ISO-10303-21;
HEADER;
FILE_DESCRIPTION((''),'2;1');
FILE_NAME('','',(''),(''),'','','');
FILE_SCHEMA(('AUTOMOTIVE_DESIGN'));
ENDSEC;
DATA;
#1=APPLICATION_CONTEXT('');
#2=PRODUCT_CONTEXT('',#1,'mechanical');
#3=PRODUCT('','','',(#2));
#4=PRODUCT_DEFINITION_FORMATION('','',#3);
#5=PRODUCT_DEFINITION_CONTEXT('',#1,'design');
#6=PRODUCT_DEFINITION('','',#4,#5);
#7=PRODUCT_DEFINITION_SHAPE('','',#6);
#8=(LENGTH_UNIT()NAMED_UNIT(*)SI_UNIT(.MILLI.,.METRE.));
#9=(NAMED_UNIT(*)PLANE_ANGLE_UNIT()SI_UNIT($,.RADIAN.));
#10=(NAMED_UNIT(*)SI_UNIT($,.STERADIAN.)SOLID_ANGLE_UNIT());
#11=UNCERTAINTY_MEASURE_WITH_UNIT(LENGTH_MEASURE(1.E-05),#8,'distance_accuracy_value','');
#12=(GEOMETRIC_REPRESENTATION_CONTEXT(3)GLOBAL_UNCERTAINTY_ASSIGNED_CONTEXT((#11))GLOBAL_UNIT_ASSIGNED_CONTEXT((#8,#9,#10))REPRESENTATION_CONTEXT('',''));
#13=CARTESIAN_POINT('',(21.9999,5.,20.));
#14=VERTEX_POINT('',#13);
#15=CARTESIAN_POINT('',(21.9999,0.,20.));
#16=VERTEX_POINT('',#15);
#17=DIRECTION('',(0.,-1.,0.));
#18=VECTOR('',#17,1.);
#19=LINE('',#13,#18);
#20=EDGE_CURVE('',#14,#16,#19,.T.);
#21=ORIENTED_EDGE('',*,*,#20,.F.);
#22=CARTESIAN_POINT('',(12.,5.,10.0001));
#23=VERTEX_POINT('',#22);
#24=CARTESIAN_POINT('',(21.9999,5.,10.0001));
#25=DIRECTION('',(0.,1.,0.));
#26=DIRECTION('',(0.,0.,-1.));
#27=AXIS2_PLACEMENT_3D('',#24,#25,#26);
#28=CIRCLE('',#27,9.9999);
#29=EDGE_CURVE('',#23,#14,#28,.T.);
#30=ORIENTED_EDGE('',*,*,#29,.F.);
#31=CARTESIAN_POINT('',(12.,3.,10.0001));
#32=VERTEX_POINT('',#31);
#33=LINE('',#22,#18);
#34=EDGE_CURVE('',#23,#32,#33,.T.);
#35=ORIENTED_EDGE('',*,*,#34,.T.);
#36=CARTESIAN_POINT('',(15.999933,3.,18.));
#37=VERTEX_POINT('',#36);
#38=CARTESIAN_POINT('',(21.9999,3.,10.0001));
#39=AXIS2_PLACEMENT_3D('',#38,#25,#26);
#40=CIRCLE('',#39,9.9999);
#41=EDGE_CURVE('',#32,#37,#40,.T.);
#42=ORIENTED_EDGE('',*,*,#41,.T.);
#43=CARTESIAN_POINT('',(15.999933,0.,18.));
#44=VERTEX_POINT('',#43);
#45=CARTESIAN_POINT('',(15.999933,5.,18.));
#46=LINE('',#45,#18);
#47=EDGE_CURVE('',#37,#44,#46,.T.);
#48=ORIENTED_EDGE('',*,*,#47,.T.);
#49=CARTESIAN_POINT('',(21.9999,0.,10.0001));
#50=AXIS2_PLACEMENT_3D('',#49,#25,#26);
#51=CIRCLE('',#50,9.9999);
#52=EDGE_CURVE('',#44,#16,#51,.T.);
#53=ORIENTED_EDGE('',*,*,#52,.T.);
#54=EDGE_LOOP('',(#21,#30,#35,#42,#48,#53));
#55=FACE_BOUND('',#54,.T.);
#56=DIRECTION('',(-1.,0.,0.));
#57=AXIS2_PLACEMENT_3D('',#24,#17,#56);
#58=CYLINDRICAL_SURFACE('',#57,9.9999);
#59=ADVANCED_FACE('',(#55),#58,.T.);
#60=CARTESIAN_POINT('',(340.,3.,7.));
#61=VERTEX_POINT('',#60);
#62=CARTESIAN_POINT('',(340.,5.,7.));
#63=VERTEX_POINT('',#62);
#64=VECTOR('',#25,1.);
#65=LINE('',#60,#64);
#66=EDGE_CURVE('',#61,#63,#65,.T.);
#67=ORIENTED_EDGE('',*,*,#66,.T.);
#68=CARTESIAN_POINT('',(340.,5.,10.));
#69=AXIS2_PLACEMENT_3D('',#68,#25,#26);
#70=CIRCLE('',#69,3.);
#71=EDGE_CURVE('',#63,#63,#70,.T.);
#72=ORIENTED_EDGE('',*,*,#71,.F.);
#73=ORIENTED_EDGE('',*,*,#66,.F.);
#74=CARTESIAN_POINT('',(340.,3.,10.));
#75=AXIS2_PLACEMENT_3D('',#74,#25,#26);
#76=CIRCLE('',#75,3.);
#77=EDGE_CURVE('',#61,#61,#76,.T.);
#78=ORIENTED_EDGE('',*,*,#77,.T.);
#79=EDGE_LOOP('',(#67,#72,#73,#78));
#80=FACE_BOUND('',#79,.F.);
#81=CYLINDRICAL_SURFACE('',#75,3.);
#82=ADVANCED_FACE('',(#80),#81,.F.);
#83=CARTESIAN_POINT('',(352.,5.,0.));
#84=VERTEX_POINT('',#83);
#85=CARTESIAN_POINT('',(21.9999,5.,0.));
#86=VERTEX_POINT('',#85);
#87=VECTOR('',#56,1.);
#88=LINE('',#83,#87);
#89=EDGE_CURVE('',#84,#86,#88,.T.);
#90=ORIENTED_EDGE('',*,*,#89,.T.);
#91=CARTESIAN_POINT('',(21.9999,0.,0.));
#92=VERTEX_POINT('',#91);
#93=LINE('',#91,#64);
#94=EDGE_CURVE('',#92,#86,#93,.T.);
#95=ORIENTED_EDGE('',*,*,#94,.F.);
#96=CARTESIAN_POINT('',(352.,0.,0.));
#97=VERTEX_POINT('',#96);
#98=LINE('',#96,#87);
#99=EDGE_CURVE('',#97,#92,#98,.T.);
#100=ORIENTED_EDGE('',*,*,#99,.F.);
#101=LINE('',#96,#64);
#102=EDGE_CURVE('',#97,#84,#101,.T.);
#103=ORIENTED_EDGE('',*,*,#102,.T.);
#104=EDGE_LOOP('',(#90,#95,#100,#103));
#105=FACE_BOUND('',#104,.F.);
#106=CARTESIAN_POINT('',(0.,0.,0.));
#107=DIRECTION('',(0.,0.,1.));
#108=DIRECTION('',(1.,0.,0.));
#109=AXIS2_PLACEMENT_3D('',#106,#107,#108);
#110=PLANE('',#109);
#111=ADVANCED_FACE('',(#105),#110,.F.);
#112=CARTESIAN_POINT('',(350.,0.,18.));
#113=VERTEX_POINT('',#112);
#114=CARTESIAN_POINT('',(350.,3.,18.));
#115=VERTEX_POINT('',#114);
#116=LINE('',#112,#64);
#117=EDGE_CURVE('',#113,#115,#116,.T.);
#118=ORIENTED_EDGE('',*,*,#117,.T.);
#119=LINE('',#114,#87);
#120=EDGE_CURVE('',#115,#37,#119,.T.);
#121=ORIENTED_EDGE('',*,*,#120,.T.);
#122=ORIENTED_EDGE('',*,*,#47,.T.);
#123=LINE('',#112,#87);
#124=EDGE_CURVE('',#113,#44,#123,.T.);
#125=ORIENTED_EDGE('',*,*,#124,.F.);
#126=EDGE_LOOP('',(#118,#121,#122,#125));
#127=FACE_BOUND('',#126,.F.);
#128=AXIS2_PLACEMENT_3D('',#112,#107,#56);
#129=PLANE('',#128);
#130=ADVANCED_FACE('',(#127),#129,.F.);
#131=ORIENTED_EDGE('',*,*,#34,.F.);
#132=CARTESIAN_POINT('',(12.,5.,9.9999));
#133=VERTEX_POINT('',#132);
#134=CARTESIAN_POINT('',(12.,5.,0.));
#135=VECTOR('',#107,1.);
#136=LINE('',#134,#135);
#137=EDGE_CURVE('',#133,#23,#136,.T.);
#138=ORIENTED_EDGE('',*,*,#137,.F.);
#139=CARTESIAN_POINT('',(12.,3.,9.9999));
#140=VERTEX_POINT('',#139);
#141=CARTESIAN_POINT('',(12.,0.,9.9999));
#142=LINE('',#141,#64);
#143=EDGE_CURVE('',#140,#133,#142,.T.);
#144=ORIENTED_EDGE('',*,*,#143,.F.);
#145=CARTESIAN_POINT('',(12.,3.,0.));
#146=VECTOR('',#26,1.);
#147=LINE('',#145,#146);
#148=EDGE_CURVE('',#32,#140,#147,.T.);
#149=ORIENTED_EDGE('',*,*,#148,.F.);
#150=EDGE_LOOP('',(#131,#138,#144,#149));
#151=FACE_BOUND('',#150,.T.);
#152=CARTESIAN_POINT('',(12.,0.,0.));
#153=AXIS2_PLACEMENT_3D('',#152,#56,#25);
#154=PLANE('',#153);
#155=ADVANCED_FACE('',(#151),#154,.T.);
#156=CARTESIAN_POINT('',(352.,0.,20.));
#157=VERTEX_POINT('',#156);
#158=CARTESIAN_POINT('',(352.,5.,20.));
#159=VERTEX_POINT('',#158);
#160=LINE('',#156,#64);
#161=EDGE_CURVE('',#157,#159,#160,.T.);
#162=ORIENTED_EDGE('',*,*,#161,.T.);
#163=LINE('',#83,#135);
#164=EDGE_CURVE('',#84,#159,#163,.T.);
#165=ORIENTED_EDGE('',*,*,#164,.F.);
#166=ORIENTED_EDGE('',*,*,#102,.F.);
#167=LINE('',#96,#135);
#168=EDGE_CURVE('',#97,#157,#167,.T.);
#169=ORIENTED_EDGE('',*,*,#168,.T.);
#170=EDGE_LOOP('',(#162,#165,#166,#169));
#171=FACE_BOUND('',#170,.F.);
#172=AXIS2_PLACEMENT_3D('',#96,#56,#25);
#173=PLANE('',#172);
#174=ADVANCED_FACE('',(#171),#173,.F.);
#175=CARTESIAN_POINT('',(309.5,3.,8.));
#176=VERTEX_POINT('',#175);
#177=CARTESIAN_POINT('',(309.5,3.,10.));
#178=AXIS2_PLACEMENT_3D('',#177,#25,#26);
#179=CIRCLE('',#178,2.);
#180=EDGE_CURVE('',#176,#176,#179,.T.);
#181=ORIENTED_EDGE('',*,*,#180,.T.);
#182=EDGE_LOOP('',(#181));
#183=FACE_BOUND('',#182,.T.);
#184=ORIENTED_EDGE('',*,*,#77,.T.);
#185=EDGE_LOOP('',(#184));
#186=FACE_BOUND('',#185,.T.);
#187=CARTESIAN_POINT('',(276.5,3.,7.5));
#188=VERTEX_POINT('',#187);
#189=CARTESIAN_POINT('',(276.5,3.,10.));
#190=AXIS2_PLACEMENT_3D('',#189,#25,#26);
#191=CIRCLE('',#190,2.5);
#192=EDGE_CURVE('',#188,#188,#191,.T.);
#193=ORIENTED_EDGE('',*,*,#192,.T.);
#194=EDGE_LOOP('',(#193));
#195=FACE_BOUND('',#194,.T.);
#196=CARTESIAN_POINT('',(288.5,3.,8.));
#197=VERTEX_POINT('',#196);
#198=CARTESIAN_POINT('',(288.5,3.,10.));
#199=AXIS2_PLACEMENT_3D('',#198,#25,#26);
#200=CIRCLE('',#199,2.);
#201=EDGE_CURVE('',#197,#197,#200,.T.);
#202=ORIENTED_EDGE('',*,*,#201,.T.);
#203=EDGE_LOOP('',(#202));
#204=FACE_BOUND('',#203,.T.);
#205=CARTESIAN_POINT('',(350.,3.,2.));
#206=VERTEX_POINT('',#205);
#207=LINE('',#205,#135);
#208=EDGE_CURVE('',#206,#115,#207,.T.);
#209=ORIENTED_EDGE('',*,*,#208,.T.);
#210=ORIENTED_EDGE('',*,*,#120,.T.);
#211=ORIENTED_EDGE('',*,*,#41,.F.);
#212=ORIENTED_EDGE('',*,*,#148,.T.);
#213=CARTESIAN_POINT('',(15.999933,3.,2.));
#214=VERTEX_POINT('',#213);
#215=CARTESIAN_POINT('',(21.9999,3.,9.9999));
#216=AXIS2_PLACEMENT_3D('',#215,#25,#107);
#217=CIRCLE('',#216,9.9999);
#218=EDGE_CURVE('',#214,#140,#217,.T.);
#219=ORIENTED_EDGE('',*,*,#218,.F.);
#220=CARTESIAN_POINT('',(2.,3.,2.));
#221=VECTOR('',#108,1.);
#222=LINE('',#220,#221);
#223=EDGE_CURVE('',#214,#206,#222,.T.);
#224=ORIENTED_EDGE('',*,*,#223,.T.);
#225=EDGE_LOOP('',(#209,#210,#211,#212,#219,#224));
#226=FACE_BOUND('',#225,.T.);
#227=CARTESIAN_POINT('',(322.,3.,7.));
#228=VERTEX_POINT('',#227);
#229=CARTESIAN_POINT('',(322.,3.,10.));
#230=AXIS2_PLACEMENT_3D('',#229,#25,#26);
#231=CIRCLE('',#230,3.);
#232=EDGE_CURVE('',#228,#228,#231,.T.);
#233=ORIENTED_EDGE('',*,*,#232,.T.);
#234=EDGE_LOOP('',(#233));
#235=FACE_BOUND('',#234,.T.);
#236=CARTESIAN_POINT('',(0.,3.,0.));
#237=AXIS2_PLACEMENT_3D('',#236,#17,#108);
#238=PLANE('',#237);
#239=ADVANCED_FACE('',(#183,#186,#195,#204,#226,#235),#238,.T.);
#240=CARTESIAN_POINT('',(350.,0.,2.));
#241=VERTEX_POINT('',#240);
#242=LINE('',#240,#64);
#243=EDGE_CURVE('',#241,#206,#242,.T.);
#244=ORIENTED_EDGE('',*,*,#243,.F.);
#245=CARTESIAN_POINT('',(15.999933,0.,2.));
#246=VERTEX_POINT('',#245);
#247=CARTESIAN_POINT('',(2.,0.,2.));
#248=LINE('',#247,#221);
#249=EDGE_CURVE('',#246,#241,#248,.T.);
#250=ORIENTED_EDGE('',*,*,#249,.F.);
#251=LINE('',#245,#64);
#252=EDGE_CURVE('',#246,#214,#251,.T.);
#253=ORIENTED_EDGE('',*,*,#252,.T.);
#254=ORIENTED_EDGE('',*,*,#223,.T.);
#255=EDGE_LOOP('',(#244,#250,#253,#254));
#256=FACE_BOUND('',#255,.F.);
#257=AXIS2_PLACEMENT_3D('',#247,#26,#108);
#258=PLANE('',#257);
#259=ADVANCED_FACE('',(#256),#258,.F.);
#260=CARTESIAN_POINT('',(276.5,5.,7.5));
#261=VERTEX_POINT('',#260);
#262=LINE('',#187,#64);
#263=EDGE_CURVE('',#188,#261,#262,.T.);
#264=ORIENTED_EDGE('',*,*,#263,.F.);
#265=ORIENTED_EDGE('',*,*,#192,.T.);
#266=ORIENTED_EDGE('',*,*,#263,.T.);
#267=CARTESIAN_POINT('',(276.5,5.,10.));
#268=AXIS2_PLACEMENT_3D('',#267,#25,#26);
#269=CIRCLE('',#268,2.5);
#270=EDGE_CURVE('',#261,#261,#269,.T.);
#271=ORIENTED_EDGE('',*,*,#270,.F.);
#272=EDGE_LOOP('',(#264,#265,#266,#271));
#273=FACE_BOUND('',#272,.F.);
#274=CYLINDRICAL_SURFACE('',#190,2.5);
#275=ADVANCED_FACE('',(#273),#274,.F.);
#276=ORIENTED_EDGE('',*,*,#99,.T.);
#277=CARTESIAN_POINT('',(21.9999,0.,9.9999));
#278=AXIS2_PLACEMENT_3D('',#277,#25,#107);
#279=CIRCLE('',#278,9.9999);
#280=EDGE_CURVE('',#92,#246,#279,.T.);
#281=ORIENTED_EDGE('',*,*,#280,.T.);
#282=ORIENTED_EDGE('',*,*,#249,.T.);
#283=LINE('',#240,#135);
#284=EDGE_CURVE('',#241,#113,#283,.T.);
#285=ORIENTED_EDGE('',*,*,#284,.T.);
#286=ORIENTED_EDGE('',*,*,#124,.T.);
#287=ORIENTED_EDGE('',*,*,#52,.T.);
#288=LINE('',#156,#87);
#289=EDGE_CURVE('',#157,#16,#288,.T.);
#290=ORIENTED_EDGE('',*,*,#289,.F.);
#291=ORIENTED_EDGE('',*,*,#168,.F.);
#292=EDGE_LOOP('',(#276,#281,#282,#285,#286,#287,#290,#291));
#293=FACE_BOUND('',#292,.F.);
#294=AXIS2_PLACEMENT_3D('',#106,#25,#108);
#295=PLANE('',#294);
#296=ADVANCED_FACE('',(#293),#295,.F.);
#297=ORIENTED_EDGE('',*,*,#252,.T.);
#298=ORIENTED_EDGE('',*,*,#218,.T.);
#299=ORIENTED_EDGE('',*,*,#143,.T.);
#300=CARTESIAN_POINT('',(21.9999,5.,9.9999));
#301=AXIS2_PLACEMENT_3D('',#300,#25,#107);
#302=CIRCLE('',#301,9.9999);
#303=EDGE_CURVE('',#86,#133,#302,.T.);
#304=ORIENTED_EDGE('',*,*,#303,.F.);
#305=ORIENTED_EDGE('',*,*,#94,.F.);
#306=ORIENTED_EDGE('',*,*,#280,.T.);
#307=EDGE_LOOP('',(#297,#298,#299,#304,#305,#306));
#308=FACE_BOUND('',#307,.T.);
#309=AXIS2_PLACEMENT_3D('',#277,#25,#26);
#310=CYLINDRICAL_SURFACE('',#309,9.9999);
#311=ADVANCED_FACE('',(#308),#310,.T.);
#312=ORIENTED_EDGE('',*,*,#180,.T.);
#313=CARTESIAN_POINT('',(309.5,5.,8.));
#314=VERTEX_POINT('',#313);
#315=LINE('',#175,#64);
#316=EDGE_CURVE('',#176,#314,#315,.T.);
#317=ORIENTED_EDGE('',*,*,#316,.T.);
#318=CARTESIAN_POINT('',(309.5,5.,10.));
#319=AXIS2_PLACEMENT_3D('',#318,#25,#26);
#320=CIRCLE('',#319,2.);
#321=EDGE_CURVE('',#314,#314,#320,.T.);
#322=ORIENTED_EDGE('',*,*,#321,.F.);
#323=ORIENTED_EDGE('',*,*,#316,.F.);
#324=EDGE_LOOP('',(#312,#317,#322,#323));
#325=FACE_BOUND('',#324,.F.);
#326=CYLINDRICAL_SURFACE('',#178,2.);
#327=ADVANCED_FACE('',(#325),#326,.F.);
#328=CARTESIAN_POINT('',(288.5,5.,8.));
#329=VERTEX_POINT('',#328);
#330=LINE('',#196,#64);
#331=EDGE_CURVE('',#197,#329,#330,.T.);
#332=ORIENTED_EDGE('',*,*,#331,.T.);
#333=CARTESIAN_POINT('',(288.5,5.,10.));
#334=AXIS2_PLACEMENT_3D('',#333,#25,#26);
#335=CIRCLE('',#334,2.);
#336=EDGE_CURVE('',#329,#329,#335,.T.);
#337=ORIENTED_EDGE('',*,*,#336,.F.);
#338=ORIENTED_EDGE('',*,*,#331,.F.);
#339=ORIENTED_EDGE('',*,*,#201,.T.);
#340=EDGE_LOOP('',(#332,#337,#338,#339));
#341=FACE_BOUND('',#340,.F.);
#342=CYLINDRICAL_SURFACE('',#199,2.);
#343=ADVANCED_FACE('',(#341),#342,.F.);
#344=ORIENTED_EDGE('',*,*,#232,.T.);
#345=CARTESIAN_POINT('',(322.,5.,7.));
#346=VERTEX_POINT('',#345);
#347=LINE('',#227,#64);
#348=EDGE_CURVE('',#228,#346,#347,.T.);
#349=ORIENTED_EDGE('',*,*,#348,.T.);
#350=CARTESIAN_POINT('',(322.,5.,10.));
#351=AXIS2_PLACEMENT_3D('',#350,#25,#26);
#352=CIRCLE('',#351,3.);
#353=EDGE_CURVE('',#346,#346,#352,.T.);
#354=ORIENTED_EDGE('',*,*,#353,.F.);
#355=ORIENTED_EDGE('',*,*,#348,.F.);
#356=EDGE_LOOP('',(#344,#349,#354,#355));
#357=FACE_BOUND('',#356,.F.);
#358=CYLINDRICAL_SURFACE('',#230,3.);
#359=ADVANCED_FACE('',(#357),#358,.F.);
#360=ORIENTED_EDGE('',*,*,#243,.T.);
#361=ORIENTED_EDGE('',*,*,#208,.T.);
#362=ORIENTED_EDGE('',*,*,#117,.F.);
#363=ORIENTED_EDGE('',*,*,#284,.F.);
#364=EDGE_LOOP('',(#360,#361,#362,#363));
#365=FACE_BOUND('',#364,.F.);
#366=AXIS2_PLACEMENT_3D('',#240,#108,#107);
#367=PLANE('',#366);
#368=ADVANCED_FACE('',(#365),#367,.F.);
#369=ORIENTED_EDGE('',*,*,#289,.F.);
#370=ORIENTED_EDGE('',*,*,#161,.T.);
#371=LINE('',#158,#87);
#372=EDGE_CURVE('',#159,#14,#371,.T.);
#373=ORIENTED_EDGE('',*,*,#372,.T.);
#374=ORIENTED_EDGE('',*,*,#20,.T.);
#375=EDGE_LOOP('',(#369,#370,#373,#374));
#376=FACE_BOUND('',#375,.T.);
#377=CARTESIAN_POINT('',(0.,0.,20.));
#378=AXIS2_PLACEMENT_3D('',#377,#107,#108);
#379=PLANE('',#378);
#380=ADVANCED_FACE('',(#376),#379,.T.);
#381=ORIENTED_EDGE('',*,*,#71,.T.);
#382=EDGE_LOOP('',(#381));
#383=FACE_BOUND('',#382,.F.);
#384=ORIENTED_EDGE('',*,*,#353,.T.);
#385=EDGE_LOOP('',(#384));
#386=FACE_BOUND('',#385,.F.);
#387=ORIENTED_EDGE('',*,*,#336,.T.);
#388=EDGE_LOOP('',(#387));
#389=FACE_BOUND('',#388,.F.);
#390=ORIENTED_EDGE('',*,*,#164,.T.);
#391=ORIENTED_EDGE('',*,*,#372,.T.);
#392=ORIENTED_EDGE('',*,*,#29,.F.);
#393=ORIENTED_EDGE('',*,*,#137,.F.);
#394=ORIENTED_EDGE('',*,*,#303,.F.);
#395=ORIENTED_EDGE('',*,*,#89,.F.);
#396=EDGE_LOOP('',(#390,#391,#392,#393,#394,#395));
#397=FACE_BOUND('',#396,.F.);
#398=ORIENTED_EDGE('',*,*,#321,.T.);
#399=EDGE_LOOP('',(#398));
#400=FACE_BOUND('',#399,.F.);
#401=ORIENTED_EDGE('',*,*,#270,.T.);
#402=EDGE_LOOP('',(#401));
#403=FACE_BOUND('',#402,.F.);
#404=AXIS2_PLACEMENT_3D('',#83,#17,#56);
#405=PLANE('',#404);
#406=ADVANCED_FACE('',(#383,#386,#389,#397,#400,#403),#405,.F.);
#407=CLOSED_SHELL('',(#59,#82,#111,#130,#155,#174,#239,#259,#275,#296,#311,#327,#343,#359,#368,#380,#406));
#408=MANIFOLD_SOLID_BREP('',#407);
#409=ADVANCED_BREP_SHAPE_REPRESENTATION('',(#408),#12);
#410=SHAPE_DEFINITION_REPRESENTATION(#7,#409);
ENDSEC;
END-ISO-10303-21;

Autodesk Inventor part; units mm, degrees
ref_plane "YZ Plane" through (0, 0, 0) normal (1, 0, 0) x (0, 1, 0)
ref_plane "XZ Plane" through (0, 0, 0) normal (0, 1, 0) x (-1, 0, 0)
ref_plane "XY Plane" through (0, 0, 0) normal (0, 0, 1) x (1, 0, 0)
sketch "スケッチ1" plane through (0, 0, 0) normal (0, 0, 1) x (1, 0, 0)
  line L0 (0, 0) -> (352, 0)
  line L1 (352, 0) -> (352, 5)
  line L2 (352, 5) -> (0, 5)
  line L3 (0, 5) -> (0, 0)
  line L4 (0, 0) -> (6, 0)
  line L5 (0, 1) -> (0, 0)
  dimension "d0" = 352
  dimension "d1" = 5
extrude "押し出し1" add sketch "スケッチ1" along normal blind 20
sketch "スケッチ3" plane through (0, 0, 0) normal (-1, 0, 0) x (0, 0, 1)
  line L0 (0, 5) -> (0, 0) projected
  line L1 (0, 0) -> (20, 0) projected
  line L2 (20, 5) -> (20, 0) projected
  line L3 (0, 5) -> (20, 5) projected
  circle A0 centre (4, 2) radius 1.2
  circle A1 centre (16, 3) radius 1.2
  dimension "d14" = 2.4
  dimension "d15" = 2.4
  dimension "d16" = 3
  dimension "d17" = 4
  dimension "d18" = 4
  dimension "d19" = 3
extrude "押し出し3" cut sketch "スケッチ3" against normal blind 6 contours A0 | A1
sketch "スケッチ4" plane through (0, 0, 0) normal (0, -1, 0) x (1, 0, 0)
  line L0 (0, 0) -> (352, 0) projected
  line L1 (352, 0) -> (352, 20) projected
  line L2 (0, 20) -> (352, 20) projected
  line L3 (0, 0) -> (0, 20) projected
  line L4 (2, 2) -> (350, 2)
  line L5 (350, 2) -> (350, 18)
  line L6 (350, 18) -> (2, 18)
  line L7 (2, 18) -> (2, 2)
  dimension "d22" = 2
  dimension "d23" = 2
  dimension "d24" = 2
  dimension "d25" = 2
extrude "押し出し4" cut sketch "スケッチ4" against normal blind 3 contours L7 L6 L5 L4
sketch "スケッチ6" plane through (0, 3, 0) normal (0, -1, 0) x (1, 0, 0)
  line L0 (350, 18) -> (350, 2) projected
  line L1 (2, 18) -> (350, 18) projected
  point P0 (0, 0)
  point P1 (340, 10)
  dimension "d35" = 10
  dimension "d36" = 8
  dimension "d37" = 16
hole "穴1" at (340, 3, 10) direction (0, 1, 0) diameter 6 end through all
sketch "スケッチ7" plane through (0, 3, 0) normal (0, -1, 0) x (1, 0, 0)
  circle A0 centre (340, 10) radius 3 projected
  line L0 (340, 10) -> (322, 10)
  point P0 (0, 0)
  dimension "d38" = 18
hole "穴2" at (322, 3, 10) direction (0, 1, 0) diameter 6 end through all
sketch "スケッチ8" plane through (0, 3, 0) normal (0, -1, 0) x (1, 0, 0)
  circle A0 centre (322, 10) radius 3 projected
  line L0 (322, 10) -> (309.5, 10)
  point P0 (0, 0)
  dimension "d46" = 12.5
hole "穴3" at (309.5, 3, 10) direction (0, 1, 0) diameter 4 end through all
sketch "スケッチ9" plane through (0, 3, 0) normal (0, -1, 0) x (1, 0, 0)
  circle A0 centre (309.5, 10) radius 2 projected
  line L0 (309.5, 10) -> (288.5, 10)
  point P0 (0, 0)
  dimension "d54" = 21
hole "穴4" at (288.5, 3, 10) direction (0, 1, 0) diameter 4 end through all
sketch "スケッチ10" plane through (0, 3, 0) normal (0, -1, 0) x (1, 0, 0)
  circle A0 centre (288.5, 10) radius 2 projected
  line L0 (288.5, 10) -> (276.5, 10)
  point P0 (0, 0)
  dimension "d62" = 12
hole "穴5" at (276.5, 3, 10) direction (0, 1, 0) diameter 5 end through all
sketch "スケッチ11" plane through (0, 0, 0) normal (0, 0, -1) x (-1, 0, 0)
  line L0 (0, 0) -> (-352, 0) projected
  line L1 (0, 5) -> (0, 0) projected
  line L2 (-352, 5) -> (0, 5) projected
  line L3 (-352, 5) -> (0, 5) projected
  line L4 (0, 0) -> (-12, 0)
  line L5 (-12, 0) -> (-12, 5)
  line L6 (-12, 5) -> (0, 5)
  line L7 (0, 5) -> (0, 0)
  dimension "d70" = 12
extrude "押し出し5" cut sketch "スケッチ11" against normal through all
fillet "フィレット1" radius 10 2 edges at (12, 2.5, 20) (12, 2.5, 0)
equation "\"d36\" = 0.5 * d37"
properties part number "arm1_L"
